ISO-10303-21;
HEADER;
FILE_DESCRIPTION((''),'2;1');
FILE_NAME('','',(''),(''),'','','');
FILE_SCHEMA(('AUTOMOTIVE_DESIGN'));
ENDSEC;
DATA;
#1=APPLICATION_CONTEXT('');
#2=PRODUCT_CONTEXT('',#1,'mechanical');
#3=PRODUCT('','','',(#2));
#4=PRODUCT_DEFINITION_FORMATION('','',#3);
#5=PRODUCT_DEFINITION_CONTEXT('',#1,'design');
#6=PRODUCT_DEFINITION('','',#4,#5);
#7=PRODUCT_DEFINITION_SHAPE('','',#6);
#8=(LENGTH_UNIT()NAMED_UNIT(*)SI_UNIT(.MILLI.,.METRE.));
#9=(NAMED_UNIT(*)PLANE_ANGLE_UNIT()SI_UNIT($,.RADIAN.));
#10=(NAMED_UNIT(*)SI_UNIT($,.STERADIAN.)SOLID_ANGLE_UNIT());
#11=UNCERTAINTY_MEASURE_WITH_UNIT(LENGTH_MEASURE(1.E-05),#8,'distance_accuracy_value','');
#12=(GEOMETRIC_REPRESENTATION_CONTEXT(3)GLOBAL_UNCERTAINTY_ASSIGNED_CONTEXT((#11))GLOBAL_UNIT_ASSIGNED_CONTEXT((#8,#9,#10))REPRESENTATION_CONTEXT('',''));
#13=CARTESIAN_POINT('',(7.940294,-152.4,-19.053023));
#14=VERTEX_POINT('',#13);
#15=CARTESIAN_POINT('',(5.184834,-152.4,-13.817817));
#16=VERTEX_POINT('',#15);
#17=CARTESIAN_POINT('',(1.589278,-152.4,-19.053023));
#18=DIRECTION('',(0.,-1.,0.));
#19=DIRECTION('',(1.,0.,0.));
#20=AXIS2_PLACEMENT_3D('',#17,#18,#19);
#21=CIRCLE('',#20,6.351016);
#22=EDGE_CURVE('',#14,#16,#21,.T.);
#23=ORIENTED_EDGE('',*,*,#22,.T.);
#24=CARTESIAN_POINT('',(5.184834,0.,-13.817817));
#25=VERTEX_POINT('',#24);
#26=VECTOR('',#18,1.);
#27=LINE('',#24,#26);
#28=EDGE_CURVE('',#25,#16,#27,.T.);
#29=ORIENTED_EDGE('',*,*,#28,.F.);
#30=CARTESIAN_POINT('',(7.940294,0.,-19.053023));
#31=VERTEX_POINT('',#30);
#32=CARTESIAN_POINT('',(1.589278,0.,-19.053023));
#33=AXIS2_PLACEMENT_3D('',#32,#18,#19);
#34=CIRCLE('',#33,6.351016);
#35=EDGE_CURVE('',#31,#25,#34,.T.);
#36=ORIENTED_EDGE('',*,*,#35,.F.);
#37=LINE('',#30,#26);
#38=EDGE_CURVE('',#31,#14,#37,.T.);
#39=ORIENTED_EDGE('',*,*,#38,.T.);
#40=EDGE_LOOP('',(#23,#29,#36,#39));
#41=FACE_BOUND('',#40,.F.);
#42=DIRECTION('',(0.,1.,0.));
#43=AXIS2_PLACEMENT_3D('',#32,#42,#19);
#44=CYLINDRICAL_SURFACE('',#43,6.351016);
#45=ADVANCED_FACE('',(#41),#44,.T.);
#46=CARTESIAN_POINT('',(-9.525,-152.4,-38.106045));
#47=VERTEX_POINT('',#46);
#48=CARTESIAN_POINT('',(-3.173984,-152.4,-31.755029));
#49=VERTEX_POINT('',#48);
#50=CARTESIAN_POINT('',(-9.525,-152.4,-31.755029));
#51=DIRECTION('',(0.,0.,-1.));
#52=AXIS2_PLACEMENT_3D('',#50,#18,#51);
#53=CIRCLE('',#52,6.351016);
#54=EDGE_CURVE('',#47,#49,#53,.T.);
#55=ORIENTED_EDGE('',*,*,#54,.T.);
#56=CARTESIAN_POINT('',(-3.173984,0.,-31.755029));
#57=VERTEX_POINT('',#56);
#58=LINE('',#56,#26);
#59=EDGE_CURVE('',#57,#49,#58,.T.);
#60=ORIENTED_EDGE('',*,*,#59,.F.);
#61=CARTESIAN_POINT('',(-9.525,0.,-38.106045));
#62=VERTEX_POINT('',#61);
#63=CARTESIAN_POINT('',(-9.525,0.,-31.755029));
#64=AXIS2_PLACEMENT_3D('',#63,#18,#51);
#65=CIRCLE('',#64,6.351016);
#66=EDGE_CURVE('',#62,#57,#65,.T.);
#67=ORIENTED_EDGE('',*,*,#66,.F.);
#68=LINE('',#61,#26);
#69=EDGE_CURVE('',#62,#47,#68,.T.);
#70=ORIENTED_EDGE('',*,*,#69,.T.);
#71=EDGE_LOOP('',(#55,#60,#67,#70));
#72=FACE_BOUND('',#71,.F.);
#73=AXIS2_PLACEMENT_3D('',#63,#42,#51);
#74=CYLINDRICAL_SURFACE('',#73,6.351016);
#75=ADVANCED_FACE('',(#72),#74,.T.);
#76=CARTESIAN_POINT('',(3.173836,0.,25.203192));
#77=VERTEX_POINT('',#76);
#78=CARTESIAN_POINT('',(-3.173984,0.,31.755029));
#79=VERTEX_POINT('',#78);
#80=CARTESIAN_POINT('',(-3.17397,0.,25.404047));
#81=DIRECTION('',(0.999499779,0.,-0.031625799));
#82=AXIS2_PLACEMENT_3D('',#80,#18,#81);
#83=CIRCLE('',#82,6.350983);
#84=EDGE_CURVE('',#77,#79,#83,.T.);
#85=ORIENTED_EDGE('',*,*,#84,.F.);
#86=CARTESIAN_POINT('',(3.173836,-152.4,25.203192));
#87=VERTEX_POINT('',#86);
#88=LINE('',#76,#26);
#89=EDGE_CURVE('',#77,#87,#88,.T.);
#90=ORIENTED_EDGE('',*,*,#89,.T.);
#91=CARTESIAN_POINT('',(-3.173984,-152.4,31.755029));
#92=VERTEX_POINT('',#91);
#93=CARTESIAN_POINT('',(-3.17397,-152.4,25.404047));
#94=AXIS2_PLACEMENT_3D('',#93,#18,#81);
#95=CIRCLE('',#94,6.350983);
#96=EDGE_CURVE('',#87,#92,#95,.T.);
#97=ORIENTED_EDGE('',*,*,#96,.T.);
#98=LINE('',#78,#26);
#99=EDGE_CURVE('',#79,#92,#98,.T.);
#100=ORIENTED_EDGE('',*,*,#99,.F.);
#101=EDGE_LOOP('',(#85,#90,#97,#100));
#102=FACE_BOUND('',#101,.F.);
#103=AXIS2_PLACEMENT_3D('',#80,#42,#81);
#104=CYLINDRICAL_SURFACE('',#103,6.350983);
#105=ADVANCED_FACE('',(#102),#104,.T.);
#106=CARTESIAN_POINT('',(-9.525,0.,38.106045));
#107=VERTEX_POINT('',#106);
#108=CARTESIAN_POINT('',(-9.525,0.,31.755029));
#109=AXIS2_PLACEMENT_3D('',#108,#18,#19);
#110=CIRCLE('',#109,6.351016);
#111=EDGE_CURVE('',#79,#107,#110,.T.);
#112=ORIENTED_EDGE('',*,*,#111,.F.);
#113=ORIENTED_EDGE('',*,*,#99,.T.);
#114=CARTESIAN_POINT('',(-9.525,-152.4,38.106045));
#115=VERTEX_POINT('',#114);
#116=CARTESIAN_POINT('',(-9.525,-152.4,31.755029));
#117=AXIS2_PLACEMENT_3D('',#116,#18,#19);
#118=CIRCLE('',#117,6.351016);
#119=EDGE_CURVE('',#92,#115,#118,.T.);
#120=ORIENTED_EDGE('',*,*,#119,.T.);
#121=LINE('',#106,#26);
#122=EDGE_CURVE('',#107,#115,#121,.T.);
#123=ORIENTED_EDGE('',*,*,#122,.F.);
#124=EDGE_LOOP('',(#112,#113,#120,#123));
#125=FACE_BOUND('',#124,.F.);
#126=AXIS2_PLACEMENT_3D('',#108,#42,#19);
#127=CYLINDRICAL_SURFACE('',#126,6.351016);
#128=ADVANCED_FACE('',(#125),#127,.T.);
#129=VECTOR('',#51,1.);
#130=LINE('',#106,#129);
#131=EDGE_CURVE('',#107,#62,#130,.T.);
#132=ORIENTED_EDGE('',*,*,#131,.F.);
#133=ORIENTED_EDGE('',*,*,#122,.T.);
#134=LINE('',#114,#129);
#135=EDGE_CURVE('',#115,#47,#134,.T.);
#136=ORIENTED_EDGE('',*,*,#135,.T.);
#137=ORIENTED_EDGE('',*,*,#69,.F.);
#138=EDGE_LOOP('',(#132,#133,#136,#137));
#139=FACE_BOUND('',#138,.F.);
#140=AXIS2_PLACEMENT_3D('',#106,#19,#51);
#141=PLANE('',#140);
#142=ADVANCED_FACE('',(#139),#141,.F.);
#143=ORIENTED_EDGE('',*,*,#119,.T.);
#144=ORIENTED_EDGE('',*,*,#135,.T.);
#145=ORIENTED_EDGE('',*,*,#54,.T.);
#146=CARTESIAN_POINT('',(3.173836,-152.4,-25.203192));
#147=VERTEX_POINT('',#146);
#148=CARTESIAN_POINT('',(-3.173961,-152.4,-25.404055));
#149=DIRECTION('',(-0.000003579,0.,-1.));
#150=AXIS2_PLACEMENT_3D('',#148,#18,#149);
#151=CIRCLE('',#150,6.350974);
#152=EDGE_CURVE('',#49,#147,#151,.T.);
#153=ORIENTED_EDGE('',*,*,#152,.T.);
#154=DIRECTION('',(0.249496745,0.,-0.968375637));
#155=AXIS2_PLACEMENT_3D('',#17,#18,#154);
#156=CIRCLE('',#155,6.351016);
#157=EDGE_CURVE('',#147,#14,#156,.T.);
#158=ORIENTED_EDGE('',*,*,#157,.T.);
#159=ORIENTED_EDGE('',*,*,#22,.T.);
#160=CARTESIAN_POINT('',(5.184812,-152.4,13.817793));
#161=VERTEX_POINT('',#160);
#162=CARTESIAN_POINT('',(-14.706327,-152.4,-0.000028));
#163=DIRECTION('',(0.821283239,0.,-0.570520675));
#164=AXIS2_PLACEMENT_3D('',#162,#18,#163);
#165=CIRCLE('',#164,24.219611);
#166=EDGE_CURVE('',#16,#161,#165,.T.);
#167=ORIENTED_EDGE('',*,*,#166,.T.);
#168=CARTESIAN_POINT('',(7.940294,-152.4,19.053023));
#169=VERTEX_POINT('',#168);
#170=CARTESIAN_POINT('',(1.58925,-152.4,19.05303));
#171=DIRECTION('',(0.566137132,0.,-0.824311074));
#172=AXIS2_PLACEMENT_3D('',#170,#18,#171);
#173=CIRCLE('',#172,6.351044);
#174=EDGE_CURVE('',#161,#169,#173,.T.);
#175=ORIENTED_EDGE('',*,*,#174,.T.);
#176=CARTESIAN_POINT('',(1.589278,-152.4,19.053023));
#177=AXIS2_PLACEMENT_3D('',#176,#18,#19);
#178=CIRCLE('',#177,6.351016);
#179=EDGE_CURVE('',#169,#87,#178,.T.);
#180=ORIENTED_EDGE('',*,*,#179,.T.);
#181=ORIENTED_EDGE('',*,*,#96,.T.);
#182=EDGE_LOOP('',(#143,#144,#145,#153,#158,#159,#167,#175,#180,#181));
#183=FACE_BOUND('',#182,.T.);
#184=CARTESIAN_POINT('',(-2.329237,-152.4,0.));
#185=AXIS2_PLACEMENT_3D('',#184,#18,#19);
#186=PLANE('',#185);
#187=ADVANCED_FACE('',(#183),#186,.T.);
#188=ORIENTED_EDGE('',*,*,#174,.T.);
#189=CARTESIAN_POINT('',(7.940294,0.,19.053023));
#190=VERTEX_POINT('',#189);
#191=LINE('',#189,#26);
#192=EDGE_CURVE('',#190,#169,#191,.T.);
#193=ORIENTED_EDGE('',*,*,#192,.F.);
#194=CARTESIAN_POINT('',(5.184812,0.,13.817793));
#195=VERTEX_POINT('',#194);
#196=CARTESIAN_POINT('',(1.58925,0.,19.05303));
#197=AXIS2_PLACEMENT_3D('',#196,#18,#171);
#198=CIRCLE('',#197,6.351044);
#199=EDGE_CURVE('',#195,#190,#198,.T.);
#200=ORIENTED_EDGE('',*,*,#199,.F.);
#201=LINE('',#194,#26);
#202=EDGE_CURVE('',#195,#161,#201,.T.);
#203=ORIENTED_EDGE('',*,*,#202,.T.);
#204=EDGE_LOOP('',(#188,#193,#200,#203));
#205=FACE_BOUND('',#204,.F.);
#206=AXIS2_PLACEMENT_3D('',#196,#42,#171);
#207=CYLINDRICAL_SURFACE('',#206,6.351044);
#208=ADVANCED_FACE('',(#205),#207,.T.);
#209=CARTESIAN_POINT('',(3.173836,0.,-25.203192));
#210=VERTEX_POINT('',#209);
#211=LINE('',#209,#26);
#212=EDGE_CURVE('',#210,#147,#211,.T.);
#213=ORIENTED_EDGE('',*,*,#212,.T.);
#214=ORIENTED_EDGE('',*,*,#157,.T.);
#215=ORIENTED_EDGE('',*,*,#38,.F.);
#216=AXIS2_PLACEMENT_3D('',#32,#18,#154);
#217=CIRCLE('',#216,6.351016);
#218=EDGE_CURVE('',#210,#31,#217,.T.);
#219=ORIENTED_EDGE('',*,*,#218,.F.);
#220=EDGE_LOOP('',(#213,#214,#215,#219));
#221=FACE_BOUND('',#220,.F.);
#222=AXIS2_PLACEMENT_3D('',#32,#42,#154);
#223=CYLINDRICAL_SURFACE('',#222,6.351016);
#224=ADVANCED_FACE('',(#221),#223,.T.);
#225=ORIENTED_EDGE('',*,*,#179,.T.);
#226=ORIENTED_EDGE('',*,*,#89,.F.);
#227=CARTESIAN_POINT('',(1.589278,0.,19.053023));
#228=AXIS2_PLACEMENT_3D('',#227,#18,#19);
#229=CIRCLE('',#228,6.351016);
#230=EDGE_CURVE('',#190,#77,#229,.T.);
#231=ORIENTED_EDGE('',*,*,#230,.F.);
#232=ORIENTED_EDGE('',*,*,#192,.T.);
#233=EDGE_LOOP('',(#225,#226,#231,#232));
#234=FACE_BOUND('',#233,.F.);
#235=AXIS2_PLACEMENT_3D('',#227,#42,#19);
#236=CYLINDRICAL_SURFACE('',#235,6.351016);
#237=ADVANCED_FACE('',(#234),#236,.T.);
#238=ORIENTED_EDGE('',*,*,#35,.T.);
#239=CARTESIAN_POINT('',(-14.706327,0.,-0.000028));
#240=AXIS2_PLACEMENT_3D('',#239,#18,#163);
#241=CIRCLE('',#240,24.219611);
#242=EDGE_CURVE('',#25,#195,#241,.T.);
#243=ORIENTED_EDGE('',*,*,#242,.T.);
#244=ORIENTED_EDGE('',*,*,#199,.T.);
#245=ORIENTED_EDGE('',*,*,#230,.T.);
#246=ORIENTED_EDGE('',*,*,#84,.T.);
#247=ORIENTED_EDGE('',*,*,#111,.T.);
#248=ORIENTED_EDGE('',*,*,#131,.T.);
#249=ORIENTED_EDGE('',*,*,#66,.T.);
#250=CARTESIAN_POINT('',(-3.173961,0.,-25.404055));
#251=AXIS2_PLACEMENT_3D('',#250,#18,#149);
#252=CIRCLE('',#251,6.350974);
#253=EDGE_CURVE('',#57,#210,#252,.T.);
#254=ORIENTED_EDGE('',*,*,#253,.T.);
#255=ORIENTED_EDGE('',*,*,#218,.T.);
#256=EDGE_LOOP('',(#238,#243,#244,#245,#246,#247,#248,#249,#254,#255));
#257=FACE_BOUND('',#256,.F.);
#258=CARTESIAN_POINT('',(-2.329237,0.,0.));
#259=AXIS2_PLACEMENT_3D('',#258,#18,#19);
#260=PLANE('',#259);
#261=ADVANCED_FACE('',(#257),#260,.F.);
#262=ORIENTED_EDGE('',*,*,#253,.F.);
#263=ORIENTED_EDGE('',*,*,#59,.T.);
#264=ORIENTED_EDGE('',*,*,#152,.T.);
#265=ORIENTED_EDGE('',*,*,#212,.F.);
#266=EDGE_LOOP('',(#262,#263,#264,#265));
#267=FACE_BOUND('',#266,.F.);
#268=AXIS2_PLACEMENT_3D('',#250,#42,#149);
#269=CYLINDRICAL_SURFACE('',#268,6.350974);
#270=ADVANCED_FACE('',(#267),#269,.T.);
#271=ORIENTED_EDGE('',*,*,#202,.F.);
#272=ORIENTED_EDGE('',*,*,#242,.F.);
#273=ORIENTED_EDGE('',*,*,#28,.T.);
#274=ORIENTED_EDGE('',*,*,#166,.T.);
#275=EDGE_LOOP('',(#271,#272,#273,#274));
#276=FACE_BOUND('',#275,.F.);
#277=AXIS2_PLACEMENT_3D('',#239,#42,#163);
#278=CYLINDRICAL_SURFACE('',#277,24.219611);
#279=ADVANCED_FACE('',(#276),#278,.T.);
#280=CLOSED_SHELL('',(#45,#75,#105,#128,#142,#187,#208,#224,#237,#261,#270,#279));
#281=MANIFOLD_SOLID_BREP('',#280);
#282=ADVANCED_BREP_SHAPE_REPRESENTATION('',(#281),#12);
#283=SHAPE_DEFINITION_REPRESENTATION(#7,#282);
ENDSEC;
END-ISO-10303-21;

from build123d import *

# Parameters (mm, degrees)
F1_DEPTH = 152.4


# Not quite as in the source:
# - ends of sketch curves that miss each other by under 0.0002 mm in the source are joined


with BuildPart() as f1:
    # F0 (on Front) → F1 (new body)
    with BuildSketch(Plane.XZ):
        with BuildLine():
            ThreePointArc((-3.173984, 31.7550292), (-5.034153519, 36.245875681), (-9.525, 38.1060452))
            Line((-9.525, 38.1060452), (-9.525, -38.1060452))
            ThreePointArc((-9.525, -38.1060452), (-5.034153519, -36.245875681), (-3.173984, -31.7550292))
            ThreePointArc((-3.173984, -31.7550292), (1.3873070975, -29.8232975079), (3.1738358164, -25.2031917651))
            ThreePointArc((3.1738358164, -25.2031917651), (6.6091861803, -22.9435143548), (7.940294, -19.0530226))
            ThreePointArc((7.940294, -19.0530226), (7.2093686546, -16.094985199), (5.1848340025, -13.817816657))
            ThreePointArc((5.1848340025, -13.817816657), (9.5132844595, -8.141e-06), (5.1848116567, 13.8177933751))
            ThreePointArc((5.1848116567, 13.8177933751), (7.2093653059, 16.0949788365), (7.940294, 19.0530226))
            ThreePointArc((7.940294, 19.0530226), (6.6091861803, 22.9435143548), (3.1738358164, 25.2031917651))
            ThreePointArc((3.1738358164, 25.2031917651), (1.3873169736, 29.8232821056), (-3.173984, 31.7550292))
        make_face()
    extrude(amount=F1_DEPTH)


solid = f1.part
